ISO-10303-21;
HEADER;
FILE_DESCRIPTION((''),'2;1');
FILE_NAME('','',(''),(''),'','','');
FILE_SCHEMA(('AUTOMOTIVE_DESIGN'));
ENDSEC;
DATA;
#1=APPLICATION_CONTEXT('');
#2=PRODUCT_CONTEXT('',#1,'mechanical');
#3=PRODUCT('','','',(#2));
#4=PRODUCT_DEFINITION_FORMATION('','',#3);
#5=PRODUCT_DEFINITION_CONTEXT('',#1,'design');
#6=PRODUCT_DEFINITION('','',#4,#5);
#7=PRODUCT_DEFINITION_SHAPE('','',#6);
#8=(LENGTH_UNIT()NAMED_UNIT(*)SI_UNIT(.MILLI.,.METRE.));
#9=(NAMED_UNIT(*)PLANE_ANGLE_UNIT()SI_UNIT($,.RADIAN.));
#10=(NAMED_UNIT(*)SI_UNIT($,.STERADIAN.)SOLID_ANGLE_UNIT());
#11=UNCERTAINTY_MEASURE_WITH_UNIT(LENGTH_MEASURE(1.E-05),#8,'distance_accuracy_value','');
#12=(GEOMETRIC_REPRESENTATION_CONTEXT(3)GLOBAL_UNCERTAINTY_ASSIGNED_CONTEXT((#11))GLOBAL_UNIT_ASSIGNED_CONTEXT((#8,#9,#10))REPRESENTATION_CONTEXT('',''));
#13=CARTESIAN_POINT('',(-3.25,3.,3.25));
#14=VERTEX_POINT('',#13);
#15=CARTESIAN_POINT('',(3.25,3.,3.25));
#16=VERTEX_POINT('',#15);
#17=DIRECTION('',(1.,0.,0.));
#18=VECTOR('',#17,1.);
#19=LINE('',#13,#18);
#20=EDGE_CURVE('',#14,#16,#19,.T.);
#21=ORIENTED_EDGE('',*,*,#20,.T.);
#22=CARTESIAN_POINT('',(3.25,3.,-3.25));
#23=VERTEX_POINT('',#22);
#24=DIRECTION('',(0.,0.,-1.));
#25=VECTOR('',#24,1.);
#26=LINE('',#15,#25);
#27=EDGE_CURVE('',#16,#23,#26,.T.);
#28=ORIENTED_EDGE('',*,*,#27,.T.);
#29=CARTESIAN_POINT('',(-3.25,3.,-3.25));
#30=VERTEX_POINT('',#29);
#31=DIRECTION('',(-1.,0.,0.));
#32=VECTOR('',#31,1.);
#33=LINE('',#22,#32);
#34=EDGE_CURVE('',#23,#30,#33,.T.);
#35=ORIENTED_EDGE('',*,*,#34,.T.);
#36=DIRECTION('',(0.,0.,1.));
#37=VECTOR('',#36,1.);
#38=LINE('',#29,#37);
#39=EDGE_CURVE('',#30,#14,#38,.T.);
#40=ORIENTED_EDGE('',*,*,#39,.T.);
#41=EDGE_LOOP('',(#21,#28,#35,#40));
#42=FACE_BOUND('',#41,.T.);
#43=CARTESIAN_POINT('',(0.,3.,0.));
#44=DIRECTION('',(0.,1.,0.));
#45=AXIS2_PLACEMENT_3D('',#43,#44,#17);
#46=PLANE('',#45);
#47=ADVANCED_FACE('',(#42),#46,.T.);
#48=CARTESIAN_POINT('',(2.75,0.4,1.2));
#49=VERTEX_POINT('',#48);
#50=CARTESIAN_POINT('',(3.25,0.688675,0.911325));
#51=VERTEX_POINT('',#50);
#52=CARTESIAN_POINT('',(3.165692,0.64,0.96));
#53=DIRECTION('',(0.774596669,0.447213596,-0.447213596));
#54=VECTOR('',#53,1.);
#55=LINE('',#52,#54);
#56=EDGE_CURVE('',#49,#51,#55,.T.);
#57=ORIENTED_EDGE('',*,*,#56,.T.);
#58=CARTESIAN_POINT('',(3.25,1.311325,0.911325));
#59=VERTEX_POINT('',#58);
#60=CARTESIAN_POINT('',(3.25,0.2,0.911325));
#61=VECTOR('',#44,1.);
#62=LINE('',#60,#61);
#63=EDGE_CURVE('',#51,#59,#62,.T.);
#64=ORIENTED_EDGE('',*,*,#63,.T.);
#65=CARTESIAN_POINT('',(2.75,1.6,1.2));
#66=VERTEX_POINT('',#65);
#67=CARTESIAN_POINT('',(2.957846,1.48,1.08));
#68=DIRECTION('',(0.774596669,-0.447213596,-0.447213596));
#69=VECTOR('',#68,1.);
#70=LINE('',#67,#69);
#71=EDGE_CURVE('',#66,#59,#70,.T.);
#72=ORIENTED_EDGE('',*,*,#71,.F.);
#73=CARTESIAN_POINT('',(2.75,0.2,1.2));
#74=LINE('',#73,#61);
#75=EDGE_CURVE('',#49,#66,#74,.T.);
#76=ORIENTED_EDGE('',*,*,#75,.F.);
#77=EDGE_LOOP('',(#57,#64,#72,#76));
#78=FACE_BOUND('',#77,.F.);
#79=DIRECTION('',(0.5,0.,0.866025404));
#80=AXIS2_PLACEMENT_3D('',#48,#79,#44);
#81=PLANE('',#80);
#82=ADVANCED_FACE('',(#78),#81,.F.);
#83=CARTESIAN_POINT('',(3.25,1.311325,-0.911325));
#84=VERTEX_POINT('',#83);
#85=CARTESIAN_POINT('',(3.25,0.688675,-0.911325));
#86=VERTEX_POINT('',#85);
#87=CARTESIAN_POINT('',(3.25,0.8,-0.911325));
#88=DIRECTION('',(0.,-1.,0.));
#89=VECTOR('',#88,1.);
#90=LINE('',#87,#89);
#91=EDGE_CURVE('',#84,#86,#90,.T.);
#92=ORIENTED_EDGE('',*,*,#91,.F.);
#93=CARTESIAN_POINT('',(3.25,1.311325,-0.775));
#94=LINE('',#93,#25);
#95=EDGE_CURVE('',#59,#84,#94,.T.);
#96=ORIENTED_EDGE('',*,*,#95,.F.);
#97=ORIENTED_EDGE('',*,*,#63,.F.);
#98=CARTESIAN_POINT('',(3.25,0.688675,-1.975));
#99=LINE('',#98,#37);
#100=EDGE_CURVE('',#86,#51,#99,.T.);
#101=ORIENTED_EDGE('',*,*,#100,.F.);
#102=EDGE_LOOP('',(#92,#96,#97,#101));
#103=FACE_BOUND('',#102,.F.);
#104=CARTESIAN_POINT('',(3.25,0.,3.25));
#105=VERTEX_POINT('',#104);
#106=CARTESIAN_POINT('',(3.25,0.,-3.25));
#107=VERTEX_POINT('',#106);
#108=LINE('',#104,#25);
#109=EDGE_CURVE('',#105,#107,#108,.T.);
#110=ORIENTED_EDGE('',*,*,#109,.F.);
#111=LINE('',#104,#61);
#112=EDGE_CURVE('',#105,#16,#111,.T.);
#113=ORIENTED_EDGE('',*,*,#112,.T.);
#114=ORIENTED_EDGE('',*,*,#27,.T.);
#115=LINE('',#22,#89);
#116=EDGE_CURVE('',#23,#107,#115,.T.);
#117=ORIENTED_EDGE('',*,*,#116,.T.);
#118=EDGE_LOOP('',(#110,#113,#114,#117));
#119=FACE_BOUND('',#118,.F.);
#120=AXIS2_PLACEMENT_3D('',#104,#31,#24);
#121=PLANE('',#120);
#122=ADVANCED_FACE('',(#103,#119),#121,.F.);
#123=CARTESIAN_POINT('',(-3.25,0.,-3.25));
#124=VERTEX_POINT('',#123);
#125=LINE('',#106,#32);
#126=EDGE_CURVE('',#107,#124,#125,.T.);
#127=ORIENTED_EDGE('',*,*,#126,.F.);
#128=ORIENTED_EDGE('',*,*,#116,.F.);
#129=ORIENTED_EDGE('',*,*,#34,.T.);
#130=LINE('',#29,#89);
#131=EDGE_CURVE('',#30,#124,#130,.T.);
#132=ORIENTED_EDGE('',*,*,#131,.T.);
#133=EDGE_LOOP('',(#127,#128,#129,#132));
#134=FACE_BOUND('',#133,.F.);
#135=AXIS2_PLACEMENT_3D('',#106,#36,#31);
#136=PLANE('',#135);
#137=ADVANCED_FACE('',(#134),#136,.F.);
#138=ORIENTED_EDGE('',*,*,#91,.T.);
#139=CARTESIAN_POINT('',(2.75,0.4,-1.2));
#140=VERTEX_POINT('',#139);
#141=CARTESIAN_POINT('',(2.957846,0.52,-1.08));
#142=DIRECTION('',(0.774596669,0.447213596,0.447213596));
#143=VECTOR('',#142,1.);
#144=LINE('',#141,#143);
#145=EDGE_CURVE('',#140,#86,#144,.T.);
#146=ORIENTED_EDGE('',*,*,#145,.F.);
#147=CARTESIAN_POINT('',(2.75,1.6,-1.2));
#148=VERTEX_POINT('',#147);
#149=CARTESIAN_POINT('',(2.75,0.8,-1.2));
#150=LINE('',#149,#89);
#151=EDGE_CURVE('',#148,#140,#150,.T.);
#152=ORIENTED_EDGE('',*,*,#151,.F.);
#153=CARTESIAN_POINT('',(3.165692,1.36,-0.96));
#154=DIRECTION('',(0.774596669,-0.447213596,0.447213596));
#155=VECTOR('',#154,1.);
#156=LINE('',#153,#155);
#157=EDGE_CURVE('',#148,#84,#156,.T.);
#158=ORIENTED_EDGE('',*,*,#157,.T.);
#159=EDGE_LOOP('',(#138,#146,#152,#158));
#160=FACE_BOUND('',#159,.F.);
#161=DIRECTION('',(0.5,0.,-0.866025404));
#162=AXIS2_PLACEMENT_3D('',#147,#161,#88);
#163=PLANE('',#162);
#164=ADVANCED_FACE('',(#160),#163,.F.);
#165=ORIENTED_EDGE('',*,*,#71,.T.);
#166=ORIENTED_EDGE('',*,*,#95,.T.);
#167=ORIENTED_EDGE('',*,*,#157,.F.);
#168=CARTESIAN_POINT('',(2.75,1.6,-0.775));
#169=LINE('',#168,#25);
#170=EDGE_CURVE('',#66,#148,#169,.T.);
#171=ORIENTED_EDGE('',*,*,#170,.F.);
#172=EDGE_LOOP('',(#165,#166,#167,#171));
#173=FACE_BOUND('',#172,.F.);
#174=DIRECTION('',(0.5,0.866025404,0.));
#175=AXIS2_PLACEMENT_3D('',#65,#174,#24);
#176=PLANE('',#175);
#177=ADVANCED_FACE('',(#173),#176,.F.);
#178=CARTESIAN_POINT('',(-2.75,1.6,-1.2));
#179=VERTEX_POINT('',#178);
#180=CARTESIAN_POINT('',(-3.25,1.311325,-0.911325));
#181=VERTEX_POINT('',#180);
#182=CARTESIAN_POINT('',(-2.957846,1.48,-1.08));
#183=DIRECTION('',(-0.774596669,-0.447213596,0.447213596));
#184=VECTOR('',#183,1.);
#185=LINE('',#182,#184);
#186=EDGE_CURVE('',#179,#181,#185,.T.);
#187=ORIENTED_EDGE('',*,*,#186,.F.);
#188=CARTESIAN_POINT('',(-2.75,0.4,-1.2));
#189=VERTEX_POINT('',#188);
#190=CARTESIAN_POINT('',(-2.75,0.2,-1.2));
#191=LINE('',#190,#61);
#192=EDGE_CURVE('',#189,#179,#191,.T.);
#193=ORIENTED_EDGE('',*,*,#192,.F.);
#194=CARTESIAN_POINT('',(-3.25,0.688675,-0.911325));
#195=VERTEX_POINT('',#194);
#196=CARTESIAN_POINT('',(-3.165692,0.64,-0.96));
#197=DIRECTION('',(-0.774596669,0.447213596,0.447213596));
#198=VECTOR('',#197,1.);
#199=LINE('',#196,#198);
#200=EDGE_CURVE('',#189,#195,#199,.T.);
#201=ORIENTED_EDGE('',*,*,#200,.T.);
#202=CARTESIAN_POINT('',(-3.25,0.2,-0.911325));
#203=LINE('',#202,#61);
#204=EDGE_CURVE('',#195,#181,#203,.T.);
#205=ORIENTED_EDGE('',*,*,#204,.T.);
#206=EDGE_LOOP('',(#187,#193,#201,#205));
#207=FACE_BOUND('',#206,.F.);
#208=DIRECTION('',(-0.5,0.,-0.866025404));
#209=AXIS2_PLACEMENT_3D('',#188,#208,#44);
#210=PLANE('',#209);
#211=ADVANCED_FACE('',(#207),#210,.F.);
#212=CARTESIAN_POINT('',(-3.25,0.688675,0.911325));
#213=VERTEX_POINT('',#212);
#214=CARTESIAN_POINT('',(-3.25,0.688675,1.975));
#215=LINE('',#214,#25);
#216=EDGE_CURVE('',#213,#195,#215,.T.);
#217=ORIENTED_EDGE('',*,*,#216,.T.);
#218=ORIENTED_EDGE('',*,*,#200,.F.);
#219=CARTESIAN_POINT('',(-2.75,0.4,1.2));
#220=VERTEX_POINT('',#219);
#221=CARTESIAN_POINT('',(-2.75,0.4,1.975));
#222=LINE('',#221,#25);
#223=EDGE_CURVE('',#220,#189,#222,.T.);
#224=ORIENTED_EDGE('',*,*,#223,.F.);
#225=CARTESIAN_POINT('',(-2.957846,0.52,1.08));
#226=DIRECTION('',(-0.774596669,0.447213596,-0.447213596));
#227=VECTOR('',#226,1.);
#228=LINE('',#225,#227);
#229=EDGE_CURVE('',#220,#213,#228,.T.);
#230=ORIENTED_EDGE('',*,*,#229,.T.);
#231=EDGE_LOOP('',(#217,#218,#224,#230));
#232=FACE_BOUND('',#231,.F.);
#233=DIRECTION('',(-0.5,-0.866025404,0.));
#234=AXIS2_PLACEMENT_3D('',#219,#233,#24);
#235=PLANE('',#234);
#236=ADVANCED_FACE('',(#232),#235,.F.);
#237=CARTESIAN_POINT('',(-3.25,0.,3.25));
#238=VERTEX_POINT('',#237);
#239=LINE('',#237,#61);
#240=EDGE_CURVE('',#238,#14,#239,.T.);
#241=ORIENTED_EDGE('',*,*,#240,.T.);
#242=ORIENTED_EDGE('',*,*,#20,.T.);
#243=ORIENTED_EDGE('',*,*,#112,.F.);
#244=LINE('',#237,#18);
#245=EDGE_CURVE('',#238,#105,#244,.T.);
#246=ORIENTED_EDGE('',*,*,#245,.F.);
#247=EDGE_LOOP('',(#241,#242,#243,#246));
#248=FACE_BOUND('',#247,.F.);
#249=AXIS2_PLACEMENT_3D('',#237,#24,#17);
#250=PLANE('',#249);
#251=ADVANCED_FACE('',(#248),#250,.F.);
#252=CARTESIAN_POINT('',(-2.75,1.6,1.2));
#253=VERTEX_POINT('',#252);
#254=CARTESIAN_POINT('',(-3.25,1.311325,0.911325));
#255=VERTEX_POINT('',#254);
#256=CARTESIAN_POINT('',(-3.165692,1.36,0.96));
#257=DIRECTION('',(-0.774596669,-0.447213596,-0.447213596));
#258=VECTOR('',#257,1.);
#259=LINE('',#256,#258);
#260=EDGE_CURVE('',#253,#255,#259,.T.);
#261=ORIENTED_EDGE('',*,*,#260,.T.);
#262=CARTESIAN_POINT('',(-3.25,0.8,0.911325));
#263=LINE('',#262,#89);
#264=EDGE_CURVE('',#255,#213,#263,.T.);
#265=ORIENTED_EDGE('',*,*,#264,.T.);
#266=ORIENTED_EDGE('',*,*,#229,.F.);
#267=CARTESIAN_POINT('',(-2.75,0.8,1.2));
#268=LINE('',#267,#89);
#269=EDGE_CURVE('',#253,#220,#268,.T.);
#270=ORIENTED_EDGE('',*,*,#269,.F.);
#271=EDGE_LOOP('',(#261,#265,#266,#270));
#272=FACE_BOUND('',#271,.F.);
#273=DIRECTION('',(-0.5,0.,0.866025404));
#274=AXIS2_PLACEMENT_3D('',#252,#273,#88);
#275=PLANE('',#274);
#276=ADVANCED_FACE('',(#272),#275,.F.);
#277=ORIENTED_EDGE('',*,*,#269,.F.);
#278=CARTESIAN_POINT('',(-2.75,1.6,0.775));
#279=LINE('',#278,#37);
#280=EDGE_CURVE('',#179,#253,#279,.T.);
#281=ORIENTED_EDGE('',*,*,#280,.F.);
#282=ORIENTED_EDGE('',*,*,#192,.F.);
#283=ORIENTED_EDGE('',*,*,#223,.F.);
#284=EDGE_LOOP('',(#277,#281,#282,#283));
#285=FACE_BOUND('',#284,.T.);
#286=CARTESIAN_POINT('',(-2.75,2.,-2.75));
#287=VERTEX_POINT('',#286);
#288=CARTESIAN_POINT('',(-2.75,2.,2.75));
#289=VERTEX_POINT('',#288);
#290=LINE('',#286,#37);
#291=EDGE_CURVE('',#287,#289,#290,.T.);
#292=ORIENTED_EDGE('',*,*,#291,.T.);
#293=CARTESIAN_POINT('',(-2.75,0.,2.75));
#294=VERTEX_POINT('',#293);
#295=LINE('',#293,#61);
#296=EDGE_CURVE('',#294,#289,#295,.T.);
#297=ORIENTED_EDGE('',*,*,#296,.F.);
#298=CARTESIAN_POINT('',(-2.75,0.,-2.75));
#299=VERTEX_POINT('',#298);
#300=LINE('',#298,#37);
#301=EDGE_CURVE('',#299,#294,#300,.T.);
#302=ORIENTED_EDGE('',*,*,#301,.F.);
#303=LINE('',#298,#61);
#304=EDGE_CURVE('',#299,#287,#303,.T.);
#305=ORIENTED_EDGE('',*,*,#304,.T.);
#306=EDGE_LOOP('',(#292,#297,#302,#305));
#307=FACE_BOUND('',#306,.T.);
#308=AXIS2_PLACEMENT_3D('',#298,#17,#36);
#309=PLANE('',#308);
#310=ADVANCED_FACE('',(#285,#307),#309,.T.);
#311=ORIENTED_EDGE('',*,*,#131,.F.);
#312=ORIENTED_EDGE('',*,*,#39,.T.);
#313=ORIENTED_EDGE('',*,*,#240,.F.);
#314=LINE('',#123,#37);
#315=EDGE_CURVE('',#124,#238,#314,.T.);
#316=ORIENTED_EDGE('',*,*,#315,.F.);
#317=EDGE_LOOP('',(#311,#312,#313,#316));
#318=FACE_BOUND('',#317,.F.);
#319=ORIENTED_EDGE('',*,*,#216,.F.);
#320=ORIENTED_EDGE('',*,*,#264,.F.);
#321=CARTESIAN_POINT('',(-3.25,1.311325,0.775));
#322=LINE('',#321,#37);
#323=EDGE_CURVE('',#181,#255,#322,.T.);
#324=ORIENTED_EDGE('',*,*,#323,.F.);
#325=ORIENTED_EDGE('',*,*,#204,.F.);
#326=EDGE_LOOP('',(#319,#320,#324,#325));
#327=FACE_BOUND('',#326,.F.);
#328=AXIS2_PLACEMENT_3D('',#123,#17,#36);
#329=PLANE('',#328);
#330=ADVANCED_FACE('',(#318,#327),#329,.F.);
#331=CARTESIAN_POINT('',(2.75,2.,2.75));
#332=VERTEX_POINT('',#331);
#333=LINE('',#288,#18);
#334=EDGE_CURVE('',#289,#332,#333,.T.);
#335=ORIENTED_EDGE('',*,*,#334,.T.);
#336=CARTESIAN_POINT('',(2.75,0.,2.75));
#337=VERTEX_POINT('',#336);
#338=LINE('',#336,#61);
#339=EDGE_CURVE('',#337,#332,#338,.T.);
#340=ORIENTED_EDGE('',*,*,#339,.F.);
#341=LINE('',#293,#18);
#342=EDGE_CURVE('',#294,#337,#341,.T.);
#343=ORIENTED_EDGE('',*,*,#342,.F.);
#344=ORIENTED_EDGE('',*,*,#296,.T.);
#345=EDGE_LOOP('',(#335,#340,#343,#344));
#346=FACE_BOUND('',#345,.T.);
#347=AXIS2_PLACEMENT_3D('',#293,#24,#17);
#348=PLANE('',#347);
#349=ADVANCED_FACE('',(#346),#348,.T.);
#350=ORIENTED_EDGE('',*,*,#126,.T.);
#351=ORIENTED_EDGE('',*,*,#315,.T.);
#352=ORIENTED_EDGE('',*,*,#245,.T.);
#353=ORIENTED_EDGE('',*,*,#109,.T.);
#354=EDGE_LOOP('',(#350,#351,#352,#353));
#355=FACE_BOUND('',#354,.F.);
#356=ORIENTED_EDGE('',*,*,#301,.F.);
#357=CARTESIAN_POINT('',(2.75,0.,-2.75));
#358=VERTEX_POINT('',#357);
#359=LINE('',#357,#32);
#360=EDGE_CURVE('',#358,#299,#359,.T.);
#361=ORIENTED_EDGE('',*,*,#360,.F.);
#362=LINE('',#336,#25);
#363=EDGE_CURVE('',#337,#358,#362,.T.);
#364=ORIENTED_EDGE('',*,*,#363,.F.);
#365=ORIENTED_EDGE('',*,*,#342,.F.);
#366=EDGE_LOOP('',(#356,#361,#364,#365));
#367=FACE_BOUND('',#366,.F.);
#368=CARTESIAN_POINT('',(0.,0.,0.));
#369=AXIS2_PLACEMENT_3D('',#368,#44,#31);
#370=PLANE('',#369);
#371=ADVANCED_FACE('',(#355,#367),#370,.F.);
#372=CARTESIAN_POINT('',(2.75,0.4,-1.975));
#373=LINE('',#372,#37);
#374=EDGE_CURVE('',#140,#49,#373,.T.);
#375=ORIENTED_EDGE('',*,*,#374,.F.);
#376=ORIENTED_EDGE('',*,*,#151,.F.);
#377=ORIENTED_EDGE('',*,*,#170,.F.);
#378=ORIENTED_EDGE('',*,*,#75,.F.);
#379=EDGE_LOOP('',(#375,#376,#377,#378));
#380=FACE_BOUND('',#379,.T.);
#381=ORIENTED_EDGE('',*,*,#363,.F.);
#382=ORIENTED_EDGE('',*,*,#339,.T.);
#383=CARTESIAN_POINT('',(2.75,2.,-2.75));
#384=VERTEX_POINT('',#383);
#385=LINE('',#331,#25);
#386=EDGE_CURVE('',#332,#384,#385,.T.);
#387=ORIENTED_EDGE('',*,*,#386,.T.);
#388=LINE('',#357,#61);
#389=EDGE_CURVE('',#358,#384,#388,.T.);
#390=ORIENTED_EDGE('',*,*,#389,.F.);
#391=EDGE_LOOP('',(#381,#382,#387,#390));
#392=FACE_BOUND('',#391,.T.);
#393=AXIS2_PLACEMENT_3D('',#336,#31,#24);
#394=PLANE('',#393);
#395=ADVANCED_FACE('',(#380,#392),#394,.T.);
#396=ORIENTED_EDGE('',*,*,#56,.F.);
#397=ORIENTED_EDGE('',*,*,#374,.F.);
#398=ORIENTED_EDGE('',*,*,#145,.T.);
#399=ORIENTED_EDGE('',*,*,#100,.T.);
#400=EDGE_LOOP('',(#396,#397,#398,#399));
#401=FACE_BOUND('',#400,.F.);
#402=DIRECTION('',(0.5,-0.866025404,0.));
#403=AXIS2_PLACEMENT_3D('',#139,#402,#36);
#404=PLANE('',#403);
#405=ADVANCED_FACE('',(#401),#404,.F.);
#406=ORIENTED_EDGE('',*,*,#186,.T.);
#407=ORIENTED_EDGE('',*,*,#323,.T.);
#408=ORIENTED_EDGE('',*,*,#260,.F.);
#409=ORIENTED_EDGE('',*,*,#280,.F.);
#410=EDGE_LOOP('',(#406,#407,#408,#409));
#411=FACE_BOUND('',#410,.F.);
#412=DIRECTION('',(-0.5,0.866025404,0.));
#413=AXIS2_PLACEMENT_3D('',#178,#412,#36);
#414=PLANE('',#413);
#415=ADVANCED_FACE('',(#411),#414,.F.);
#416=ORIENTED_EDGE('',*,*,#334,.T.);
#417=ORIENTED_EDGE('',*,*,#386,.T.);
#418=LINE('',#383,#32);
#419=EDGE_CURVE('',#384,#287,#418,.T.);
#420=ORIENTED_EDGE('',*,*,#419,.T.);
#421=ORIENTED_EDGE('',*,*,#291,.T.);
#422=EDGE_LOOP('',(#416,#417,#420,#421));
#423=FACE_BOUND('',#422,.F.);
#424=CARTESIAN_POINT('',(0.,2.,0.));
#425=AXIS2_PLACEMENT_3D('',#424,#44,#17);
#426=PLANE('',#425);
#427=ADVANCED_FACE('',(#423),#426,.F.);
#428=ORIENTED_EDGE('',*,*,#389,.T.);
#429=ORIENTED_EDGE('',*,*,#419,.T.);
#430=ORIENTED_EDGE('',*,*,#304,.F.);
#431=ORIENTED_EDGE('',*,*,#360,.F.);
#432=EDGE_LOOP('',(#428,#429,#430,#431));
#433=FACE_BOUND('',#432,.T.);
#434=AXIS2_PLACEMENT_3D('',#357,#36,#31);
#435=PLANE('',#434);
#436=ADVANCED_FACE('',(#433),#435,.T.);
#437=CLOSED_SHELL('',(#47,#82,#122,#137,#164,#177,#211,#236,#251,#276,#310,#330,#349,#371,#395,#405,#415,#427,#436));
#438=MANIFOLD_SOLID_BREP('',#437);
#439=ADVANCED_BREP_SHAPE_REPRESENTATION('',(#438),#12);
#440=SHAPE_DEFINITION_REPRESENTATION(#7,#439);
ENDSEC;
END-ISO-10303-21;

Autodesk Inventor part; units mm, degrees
ref_plane "YZ Plane" through (0, 0, 0) normal (1, 0, 0) x (0, 1, 0)
ref_plane "XZ Plane" through (0, 0, 0) normal (0, 1, 0) x (-1, 0, 0)
ref_plane "XY Plane" through (0, 0, 0) normal (0, 0, 1) x (1, 0, 0)
sketch "Sketch2" plane through (0, 0, 0) normal (0, 1, 0) x (-1, 0, 0)
  line L0 (-2.75, -2.75) -> (2.75, -2.75)
  line L1 (2.75, -2.75) -> (2.75, 2.75)
  line L2 (2.75, 2.75) -> (-2.75, 2.75)
  line L3 (-2.75, 2.75) -> (-2.75, -2.75)
  line L4 (-2.75, -2.75) -> (2.75, 2.75) construction
  line L5 (2.75, -2.75) -> (-2.75, 2.75) construction
  line L6 (3.25, 3.25) -> (-3.25, 3.25)
  line L7 (-3.25, 3.25) -> (-3.25, -3.25)
  line L8 (-3.25, -3.25) -> (3.25, -3.25)
  line L9 (3.25, -3.25) -> (3.25, 3.25)
  line L10 (3.25, 3.25) -> (-3.25, -3.25) construction
  line L11 (-3.25, 3.25) -> (3.25, -3.25) construction
  point P0 (0, 0)
  point P1 (3.25, 0)
  point P2 (-3.25, 0)
  point P3 (3.25, 0)
  point P4 (-3.25, 0)
  point P5 (3.25, 0)
  point P6 (2.75, 0)
  point P7 (-2.75, 0)
  dimension "d2" = 5.5
  dimension "d3" = 5.5
  dimension "d6" = 6.5
  dimension "d7" = 6.5
extrude "Extrusion1" add sketch "Sketch2" along normal blind 2
sketch "Sketch4" plane through (0, 2, 0) normal (0, 1, 0) x (1, 0, 0)
  line L0 (-3.25, 3.25) -> (-3.25, -3.25) projected
  line L1 (3.25, -3.25) -> (3.25, 3.25) projected
  line L2 (-3.25, -3.25) -> (3.25, -3.25)
  line L3 (3.25, -3.25) -> (3.25, 3.25)
  line L4 (3.25, 3.25) -> (-3.25, 3.25)
  line L5 (-3.25, 3.25) -> (-3.25, -3.25)
  point P0 (0, 0)
  dimension "d10" = 6.5
extrude "Extrusion2" add sketch "Sketch4" along normal blind 1
sketch "Sketch5" plane through (0, 0, 0) normal (0, -1, 0) x (1, 0, 0)
  line L0 (-3.25, -3.25) -> (-3.25, 3.25) projected
  line L1 (3.25, 3.25) -> (3.25, -3.25) projected
  point P0 (0, 0)
  point P1 (-3.25, 0)
  point P2 (3.25, 0)
sketch "Sketch6" plane through (2.75, 0, -2.75) normal (-1, 0, 0) x (0, 0, 1)
  line L0 (1.55, 0.4) -> (3.95, 0.4)
  line L1 (3.95, 0.4) -> (3.95, 1.6)
  line L2 (3.95, 1.6) -> (1.55, 1.6)
  line L3 (1.55, 1.6) -> (1.55, 0.4)
  line L4 (1.55, 0.4) -> (3.95, 1.6) construction
  line L5 (3.95, 0.4) -> (1.55, 1.6) construction
  line L6 (0, 2) -> (5.5, 2) projected
  point P0 (2.75, 0)
  point P1 (2.75, 1)
  dimension "d13" = 2.4
  dimension "d14" = 1.2
  dimension "d15" = 1
extrude "Extrusion3" cut sketch "Sketch6" against normal blind 0.5 draft -30
sketch "Sketch7" plane through (-2.75, 0, 2.75) normal (1, 0, 0) x (0, 0, -1)
  line L0 (1.55, 0.4) -> (3.95, 0.4)
  line L1 (3.95, 0.4) -> (3.95, 1.6)
  line L2 (3.95, 1.6) -> (1.55, 1.6)
  line L3 (1.55, 1.6) -> (1.55, 0.4)
  line L4 (1.55, 0.4) -> (3.95, 1.6) construction
  line L5 (3.95, 0.4) -> (1.55, 1.6) construction
  line L6 (0, 2) -> (5.5, 2) projected
  point P0 (2.75, 0)
  point P1 (2.75, 1)
  dimension "d18" = 2.4
  dimension "d19" = 1.2
  dimension "d20" = 1
extrude "Extrusion4" cut sketch "Sketch7" against normal blind 0.5 draft -30
properties part number "snapfit_lid_v07"
